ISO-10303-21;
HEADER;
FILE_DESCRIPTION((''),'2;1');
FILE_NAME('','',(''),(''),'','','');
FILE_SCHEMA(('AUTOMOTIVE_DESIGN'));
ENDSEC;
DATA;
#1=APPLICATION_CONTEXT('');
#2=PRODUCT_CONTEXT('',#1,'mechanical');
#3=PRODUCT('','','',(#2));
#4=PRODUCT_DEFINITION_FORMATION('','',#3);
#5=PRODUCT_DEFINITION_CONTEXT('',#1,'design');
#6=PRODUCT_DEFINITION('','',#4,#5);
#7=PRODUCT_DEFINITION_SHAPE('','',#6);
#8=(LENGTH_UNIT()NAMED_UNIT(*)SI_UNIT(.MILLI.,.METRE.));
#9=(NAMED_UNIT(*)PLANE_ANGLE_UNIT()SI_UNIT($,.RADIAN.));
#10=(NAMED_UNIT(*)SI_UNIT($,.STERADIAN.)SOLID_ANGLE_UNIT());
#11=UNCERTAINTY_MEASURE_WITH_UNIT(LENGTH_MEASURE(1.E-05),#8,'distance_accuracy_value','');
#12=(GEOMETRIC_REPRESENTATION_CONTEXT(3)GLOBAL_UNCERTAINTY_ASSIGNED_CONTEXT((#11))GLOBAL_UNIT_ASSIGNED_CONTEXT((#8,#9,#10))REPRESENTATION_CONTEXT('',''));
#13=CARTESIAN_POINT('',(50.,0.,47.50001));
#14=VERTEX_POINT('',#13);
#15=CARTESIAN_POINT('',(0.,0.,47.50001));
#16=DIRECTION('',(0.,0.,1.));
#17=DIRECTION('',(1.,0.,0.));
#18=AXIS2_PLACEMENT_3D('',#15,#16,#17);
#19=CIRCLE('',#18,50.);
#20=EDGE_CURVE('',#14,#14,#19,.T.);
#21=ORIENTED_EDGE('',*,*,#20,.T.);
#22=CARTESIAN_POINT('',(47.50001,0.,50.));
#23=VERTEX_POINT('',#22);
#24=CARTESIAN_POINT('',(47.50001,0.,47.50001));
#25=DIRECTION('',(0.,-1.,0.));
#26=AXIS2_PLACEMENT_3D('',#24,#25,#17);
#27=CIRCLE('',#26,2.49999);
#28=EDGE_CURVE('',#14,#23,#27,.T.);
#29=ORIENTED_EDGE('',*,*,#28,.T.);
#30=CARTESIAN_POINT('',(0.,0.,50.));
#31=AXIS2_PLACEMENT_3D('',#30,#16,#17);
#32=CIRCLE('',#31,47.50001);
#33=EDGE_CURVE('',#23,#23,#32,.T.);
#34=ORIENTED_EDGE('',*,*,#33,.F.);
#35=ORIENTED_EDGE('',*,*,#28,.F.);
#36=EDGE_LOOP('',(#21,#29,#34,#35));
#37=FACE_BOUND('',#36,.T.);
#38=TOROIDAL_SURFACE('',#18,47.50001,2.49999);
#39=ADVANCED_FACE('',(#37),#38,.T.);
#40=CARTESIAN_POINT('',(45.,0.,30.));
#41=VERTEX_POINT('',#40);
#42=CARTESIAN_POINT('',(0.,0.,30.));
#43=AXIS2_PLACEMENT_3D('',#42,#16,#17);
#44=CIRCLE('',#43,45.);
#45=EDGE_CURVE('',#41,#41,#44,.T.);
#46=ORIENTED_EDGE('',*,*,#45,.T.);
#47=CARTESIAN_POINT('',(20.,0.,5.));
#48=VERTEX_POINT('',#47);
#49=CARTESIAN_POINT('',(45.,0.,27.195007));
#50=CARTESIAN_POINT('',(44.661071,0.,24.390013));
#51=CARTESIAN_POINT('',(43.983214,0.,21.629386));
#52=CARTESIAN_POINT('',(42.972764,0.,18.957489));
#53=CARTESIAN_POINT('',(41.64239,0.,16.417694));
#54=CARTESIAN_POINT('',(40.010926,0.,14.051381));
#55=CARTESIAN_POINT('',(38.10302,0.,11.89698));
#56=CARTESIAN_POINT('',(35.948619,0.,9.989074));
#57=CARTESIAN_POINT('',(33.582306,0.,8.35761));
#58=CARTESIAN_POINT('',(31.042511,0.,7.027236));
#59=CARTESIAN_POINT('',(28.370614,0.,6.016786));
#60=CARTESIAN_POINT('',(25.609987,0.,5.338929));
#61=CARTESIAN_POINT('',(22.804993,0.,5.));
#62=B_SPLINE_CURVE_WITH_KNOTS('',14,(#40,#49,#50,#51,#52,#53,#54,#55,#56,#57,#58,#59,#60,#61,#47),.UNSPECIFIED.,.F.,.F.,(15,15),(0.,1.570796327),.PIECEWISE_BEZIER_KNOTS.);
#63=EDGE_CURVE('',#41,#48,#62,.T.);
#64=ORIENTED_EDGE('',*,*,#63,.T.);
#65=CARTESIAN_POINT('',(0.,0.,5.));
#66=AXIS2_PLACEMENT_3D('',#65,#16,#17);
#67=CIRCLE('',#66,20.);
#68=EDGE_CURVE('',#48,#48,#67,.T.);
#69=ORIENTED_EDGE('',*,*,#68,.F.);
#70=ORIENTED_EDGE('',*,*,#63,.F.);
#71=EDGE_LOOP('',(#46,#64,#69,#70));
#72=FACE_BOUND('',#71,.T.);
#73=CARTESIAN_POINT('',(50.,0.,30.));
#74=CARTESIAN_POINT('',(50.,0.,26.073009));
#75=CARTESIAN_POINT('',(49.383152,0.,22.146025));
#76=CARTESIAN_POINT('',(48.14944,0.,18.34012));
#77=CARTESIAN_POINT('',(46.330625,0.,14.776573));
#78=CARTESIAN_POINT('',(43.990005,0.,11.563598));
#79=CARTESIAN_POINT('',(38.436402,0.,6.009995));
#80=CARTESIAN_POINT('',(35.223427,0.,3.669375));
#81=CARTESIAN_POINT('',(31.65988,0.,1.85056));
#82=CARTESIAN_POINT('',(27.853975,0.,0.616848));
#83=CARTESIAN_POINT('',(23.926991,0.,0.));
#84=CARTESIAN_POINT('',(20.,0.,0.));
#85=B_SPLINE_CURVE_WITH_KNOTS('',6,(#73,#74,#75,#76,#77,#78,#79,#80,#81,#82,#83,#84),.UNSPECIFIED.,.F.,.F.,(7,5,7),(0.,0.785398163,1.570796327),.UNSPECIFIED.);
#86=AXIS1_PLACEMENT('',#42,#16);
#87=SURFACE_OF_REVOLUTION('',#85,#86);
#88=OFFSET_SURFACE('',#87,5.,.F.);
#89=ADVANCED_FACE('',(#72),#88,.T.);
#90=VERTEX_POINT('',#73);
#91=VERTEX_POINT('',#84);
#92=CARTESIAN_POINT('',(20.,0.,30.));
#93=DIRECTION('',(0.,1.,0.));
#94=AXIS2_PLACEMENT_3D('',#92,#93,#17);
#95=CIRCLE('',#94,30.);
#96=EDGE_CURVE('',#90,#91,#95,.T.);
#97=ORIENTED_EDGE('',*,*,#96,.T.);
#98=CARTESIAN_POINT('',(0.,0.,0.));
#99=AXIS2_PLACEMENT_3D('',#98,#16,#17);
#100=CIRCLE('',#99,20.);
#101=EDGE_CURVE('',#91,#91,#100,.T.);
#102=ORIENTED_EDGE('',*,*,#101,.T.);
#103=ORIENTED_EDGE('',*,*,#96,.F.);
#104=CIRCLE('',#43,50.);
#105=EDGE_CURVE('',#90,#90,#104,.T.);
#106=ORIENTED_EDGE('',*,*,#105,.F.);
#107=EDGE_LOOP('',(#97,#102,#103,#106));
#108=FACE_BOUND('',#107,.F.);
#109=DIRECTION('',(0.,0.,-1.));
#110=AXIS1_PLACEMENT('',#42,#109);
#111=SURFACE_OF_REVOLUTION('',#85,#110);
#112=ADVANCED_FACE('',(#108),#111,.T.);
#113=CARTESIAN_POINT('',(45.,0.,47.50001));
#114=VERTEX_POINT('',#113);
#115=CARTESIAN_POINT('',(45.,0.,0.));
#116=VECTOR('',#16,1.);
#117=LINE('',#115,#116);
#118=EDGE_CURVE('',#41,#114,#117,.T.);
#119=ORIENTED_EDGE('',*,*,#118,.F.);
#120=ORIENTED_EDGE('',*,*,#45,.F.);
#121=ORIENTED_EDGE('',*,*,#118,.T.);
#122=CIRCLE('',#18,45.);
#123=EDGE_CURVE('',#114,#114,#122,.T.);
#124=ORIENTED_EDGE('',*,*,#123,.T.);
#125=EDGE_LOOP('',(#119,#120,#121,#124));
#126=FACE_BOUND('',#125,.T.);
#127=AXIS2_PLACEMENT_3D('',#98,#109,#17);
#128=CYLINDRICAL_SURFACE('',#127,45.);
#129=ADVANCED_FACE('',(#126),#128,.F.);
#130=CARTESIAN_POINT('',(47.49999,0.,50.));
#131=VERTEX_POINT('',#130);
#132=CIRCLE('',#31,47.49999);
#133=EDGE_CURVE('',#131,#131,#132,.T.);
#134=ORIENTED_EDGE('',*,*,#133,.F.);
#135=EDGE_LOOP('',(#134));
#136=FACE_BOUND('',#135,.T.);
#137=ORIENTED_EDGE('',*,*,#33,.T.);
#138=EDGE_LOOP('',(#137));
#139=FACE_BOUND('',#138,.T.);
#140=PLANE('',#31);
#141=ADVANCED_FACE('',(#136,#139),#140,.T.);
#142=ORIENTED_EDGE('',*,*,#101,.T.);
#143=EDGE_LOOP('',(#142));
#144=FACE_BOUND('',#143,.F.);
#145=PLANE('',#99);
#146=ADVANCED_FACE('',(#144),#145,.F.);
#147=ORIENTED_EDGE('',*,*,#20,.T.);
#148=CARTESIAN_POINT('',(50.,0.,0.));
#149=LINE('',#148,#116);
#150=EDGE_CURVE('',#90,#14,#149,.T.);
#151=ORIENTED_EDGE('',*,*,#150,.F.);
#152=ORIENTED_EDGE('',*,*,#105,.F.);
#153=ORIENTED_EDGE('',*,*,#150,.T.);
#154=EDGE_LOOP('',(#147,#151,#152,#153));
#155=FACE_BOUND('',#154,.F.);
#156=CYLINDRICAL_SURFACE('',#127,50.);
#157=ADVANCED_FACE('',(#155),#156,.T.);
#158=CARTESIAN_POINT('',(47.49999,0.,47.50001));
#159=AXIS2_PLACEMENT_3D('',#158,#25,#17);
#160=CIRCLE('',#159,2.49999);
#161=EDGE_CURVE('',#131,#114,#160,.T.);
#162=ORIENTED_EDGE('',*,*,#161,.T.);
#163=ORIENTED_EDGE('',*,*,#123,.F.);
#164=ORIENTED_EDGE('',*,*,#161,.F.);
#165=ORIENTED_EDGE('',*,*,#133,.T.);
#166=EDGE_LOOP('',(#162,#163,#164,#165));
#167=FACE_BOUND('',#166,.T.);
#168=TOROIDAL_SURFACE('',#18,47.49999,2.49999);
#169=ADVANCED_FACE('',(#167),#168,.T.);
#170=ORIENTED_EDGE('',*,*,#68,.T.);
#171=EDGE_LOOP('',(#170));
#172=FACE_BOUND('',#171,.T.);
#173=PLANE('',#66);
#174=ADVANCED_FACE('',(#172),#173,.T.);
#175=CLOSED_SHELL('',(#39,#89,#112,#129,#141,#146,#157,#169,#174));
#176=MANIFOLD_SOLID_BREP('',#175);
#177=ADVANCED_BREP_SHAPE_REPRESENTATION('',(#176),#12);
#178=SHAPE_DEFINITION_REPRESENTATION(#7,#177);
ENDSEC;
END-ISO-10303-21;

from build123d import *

# Parameters (mm, degrees)
F0_R     = 50
F1_DEPTH = 50
F2_R     = 30
F3_T     = -5
F4_R     = 2.49999


# Not quite as in the source:
# - a fillet or chamfer is up to 0.001 mm smaller than in the source, because OpenCascade refuses the exact size


with BuildPart() as f1:
    # F0 (on Top) → F1 (new body)
    with BuildSketch(Plane.XY):
        Circle(F0_R)
    extrude(amount=F1_DEPTH)

    # F2
    f2_edges = [f1.edges().sort_by_distance(p)[0] for p in [
        (-50, 0, 0),
    ]]
    fillet(f2_edges, radius=F2_R)

    # F3
    f3_openings = [f1.faces().sort_by_distance(p)[0] for p in [
        (0, 0, 50),
    ]]
    offset(amount=F3_T, openings=f3_openings)

    # F4 (radius 2.5 in the source; OpenCascade refuses exactly that, so slightly less here)
    f4_edges = [f1.edges().sort_by_distance(p)[0] for p in [
        (-45, 0, 50),
        (-50, 0, 50),
    ]]
    fillet(f4_edges, radius=F4_R)


solid = f1.part
